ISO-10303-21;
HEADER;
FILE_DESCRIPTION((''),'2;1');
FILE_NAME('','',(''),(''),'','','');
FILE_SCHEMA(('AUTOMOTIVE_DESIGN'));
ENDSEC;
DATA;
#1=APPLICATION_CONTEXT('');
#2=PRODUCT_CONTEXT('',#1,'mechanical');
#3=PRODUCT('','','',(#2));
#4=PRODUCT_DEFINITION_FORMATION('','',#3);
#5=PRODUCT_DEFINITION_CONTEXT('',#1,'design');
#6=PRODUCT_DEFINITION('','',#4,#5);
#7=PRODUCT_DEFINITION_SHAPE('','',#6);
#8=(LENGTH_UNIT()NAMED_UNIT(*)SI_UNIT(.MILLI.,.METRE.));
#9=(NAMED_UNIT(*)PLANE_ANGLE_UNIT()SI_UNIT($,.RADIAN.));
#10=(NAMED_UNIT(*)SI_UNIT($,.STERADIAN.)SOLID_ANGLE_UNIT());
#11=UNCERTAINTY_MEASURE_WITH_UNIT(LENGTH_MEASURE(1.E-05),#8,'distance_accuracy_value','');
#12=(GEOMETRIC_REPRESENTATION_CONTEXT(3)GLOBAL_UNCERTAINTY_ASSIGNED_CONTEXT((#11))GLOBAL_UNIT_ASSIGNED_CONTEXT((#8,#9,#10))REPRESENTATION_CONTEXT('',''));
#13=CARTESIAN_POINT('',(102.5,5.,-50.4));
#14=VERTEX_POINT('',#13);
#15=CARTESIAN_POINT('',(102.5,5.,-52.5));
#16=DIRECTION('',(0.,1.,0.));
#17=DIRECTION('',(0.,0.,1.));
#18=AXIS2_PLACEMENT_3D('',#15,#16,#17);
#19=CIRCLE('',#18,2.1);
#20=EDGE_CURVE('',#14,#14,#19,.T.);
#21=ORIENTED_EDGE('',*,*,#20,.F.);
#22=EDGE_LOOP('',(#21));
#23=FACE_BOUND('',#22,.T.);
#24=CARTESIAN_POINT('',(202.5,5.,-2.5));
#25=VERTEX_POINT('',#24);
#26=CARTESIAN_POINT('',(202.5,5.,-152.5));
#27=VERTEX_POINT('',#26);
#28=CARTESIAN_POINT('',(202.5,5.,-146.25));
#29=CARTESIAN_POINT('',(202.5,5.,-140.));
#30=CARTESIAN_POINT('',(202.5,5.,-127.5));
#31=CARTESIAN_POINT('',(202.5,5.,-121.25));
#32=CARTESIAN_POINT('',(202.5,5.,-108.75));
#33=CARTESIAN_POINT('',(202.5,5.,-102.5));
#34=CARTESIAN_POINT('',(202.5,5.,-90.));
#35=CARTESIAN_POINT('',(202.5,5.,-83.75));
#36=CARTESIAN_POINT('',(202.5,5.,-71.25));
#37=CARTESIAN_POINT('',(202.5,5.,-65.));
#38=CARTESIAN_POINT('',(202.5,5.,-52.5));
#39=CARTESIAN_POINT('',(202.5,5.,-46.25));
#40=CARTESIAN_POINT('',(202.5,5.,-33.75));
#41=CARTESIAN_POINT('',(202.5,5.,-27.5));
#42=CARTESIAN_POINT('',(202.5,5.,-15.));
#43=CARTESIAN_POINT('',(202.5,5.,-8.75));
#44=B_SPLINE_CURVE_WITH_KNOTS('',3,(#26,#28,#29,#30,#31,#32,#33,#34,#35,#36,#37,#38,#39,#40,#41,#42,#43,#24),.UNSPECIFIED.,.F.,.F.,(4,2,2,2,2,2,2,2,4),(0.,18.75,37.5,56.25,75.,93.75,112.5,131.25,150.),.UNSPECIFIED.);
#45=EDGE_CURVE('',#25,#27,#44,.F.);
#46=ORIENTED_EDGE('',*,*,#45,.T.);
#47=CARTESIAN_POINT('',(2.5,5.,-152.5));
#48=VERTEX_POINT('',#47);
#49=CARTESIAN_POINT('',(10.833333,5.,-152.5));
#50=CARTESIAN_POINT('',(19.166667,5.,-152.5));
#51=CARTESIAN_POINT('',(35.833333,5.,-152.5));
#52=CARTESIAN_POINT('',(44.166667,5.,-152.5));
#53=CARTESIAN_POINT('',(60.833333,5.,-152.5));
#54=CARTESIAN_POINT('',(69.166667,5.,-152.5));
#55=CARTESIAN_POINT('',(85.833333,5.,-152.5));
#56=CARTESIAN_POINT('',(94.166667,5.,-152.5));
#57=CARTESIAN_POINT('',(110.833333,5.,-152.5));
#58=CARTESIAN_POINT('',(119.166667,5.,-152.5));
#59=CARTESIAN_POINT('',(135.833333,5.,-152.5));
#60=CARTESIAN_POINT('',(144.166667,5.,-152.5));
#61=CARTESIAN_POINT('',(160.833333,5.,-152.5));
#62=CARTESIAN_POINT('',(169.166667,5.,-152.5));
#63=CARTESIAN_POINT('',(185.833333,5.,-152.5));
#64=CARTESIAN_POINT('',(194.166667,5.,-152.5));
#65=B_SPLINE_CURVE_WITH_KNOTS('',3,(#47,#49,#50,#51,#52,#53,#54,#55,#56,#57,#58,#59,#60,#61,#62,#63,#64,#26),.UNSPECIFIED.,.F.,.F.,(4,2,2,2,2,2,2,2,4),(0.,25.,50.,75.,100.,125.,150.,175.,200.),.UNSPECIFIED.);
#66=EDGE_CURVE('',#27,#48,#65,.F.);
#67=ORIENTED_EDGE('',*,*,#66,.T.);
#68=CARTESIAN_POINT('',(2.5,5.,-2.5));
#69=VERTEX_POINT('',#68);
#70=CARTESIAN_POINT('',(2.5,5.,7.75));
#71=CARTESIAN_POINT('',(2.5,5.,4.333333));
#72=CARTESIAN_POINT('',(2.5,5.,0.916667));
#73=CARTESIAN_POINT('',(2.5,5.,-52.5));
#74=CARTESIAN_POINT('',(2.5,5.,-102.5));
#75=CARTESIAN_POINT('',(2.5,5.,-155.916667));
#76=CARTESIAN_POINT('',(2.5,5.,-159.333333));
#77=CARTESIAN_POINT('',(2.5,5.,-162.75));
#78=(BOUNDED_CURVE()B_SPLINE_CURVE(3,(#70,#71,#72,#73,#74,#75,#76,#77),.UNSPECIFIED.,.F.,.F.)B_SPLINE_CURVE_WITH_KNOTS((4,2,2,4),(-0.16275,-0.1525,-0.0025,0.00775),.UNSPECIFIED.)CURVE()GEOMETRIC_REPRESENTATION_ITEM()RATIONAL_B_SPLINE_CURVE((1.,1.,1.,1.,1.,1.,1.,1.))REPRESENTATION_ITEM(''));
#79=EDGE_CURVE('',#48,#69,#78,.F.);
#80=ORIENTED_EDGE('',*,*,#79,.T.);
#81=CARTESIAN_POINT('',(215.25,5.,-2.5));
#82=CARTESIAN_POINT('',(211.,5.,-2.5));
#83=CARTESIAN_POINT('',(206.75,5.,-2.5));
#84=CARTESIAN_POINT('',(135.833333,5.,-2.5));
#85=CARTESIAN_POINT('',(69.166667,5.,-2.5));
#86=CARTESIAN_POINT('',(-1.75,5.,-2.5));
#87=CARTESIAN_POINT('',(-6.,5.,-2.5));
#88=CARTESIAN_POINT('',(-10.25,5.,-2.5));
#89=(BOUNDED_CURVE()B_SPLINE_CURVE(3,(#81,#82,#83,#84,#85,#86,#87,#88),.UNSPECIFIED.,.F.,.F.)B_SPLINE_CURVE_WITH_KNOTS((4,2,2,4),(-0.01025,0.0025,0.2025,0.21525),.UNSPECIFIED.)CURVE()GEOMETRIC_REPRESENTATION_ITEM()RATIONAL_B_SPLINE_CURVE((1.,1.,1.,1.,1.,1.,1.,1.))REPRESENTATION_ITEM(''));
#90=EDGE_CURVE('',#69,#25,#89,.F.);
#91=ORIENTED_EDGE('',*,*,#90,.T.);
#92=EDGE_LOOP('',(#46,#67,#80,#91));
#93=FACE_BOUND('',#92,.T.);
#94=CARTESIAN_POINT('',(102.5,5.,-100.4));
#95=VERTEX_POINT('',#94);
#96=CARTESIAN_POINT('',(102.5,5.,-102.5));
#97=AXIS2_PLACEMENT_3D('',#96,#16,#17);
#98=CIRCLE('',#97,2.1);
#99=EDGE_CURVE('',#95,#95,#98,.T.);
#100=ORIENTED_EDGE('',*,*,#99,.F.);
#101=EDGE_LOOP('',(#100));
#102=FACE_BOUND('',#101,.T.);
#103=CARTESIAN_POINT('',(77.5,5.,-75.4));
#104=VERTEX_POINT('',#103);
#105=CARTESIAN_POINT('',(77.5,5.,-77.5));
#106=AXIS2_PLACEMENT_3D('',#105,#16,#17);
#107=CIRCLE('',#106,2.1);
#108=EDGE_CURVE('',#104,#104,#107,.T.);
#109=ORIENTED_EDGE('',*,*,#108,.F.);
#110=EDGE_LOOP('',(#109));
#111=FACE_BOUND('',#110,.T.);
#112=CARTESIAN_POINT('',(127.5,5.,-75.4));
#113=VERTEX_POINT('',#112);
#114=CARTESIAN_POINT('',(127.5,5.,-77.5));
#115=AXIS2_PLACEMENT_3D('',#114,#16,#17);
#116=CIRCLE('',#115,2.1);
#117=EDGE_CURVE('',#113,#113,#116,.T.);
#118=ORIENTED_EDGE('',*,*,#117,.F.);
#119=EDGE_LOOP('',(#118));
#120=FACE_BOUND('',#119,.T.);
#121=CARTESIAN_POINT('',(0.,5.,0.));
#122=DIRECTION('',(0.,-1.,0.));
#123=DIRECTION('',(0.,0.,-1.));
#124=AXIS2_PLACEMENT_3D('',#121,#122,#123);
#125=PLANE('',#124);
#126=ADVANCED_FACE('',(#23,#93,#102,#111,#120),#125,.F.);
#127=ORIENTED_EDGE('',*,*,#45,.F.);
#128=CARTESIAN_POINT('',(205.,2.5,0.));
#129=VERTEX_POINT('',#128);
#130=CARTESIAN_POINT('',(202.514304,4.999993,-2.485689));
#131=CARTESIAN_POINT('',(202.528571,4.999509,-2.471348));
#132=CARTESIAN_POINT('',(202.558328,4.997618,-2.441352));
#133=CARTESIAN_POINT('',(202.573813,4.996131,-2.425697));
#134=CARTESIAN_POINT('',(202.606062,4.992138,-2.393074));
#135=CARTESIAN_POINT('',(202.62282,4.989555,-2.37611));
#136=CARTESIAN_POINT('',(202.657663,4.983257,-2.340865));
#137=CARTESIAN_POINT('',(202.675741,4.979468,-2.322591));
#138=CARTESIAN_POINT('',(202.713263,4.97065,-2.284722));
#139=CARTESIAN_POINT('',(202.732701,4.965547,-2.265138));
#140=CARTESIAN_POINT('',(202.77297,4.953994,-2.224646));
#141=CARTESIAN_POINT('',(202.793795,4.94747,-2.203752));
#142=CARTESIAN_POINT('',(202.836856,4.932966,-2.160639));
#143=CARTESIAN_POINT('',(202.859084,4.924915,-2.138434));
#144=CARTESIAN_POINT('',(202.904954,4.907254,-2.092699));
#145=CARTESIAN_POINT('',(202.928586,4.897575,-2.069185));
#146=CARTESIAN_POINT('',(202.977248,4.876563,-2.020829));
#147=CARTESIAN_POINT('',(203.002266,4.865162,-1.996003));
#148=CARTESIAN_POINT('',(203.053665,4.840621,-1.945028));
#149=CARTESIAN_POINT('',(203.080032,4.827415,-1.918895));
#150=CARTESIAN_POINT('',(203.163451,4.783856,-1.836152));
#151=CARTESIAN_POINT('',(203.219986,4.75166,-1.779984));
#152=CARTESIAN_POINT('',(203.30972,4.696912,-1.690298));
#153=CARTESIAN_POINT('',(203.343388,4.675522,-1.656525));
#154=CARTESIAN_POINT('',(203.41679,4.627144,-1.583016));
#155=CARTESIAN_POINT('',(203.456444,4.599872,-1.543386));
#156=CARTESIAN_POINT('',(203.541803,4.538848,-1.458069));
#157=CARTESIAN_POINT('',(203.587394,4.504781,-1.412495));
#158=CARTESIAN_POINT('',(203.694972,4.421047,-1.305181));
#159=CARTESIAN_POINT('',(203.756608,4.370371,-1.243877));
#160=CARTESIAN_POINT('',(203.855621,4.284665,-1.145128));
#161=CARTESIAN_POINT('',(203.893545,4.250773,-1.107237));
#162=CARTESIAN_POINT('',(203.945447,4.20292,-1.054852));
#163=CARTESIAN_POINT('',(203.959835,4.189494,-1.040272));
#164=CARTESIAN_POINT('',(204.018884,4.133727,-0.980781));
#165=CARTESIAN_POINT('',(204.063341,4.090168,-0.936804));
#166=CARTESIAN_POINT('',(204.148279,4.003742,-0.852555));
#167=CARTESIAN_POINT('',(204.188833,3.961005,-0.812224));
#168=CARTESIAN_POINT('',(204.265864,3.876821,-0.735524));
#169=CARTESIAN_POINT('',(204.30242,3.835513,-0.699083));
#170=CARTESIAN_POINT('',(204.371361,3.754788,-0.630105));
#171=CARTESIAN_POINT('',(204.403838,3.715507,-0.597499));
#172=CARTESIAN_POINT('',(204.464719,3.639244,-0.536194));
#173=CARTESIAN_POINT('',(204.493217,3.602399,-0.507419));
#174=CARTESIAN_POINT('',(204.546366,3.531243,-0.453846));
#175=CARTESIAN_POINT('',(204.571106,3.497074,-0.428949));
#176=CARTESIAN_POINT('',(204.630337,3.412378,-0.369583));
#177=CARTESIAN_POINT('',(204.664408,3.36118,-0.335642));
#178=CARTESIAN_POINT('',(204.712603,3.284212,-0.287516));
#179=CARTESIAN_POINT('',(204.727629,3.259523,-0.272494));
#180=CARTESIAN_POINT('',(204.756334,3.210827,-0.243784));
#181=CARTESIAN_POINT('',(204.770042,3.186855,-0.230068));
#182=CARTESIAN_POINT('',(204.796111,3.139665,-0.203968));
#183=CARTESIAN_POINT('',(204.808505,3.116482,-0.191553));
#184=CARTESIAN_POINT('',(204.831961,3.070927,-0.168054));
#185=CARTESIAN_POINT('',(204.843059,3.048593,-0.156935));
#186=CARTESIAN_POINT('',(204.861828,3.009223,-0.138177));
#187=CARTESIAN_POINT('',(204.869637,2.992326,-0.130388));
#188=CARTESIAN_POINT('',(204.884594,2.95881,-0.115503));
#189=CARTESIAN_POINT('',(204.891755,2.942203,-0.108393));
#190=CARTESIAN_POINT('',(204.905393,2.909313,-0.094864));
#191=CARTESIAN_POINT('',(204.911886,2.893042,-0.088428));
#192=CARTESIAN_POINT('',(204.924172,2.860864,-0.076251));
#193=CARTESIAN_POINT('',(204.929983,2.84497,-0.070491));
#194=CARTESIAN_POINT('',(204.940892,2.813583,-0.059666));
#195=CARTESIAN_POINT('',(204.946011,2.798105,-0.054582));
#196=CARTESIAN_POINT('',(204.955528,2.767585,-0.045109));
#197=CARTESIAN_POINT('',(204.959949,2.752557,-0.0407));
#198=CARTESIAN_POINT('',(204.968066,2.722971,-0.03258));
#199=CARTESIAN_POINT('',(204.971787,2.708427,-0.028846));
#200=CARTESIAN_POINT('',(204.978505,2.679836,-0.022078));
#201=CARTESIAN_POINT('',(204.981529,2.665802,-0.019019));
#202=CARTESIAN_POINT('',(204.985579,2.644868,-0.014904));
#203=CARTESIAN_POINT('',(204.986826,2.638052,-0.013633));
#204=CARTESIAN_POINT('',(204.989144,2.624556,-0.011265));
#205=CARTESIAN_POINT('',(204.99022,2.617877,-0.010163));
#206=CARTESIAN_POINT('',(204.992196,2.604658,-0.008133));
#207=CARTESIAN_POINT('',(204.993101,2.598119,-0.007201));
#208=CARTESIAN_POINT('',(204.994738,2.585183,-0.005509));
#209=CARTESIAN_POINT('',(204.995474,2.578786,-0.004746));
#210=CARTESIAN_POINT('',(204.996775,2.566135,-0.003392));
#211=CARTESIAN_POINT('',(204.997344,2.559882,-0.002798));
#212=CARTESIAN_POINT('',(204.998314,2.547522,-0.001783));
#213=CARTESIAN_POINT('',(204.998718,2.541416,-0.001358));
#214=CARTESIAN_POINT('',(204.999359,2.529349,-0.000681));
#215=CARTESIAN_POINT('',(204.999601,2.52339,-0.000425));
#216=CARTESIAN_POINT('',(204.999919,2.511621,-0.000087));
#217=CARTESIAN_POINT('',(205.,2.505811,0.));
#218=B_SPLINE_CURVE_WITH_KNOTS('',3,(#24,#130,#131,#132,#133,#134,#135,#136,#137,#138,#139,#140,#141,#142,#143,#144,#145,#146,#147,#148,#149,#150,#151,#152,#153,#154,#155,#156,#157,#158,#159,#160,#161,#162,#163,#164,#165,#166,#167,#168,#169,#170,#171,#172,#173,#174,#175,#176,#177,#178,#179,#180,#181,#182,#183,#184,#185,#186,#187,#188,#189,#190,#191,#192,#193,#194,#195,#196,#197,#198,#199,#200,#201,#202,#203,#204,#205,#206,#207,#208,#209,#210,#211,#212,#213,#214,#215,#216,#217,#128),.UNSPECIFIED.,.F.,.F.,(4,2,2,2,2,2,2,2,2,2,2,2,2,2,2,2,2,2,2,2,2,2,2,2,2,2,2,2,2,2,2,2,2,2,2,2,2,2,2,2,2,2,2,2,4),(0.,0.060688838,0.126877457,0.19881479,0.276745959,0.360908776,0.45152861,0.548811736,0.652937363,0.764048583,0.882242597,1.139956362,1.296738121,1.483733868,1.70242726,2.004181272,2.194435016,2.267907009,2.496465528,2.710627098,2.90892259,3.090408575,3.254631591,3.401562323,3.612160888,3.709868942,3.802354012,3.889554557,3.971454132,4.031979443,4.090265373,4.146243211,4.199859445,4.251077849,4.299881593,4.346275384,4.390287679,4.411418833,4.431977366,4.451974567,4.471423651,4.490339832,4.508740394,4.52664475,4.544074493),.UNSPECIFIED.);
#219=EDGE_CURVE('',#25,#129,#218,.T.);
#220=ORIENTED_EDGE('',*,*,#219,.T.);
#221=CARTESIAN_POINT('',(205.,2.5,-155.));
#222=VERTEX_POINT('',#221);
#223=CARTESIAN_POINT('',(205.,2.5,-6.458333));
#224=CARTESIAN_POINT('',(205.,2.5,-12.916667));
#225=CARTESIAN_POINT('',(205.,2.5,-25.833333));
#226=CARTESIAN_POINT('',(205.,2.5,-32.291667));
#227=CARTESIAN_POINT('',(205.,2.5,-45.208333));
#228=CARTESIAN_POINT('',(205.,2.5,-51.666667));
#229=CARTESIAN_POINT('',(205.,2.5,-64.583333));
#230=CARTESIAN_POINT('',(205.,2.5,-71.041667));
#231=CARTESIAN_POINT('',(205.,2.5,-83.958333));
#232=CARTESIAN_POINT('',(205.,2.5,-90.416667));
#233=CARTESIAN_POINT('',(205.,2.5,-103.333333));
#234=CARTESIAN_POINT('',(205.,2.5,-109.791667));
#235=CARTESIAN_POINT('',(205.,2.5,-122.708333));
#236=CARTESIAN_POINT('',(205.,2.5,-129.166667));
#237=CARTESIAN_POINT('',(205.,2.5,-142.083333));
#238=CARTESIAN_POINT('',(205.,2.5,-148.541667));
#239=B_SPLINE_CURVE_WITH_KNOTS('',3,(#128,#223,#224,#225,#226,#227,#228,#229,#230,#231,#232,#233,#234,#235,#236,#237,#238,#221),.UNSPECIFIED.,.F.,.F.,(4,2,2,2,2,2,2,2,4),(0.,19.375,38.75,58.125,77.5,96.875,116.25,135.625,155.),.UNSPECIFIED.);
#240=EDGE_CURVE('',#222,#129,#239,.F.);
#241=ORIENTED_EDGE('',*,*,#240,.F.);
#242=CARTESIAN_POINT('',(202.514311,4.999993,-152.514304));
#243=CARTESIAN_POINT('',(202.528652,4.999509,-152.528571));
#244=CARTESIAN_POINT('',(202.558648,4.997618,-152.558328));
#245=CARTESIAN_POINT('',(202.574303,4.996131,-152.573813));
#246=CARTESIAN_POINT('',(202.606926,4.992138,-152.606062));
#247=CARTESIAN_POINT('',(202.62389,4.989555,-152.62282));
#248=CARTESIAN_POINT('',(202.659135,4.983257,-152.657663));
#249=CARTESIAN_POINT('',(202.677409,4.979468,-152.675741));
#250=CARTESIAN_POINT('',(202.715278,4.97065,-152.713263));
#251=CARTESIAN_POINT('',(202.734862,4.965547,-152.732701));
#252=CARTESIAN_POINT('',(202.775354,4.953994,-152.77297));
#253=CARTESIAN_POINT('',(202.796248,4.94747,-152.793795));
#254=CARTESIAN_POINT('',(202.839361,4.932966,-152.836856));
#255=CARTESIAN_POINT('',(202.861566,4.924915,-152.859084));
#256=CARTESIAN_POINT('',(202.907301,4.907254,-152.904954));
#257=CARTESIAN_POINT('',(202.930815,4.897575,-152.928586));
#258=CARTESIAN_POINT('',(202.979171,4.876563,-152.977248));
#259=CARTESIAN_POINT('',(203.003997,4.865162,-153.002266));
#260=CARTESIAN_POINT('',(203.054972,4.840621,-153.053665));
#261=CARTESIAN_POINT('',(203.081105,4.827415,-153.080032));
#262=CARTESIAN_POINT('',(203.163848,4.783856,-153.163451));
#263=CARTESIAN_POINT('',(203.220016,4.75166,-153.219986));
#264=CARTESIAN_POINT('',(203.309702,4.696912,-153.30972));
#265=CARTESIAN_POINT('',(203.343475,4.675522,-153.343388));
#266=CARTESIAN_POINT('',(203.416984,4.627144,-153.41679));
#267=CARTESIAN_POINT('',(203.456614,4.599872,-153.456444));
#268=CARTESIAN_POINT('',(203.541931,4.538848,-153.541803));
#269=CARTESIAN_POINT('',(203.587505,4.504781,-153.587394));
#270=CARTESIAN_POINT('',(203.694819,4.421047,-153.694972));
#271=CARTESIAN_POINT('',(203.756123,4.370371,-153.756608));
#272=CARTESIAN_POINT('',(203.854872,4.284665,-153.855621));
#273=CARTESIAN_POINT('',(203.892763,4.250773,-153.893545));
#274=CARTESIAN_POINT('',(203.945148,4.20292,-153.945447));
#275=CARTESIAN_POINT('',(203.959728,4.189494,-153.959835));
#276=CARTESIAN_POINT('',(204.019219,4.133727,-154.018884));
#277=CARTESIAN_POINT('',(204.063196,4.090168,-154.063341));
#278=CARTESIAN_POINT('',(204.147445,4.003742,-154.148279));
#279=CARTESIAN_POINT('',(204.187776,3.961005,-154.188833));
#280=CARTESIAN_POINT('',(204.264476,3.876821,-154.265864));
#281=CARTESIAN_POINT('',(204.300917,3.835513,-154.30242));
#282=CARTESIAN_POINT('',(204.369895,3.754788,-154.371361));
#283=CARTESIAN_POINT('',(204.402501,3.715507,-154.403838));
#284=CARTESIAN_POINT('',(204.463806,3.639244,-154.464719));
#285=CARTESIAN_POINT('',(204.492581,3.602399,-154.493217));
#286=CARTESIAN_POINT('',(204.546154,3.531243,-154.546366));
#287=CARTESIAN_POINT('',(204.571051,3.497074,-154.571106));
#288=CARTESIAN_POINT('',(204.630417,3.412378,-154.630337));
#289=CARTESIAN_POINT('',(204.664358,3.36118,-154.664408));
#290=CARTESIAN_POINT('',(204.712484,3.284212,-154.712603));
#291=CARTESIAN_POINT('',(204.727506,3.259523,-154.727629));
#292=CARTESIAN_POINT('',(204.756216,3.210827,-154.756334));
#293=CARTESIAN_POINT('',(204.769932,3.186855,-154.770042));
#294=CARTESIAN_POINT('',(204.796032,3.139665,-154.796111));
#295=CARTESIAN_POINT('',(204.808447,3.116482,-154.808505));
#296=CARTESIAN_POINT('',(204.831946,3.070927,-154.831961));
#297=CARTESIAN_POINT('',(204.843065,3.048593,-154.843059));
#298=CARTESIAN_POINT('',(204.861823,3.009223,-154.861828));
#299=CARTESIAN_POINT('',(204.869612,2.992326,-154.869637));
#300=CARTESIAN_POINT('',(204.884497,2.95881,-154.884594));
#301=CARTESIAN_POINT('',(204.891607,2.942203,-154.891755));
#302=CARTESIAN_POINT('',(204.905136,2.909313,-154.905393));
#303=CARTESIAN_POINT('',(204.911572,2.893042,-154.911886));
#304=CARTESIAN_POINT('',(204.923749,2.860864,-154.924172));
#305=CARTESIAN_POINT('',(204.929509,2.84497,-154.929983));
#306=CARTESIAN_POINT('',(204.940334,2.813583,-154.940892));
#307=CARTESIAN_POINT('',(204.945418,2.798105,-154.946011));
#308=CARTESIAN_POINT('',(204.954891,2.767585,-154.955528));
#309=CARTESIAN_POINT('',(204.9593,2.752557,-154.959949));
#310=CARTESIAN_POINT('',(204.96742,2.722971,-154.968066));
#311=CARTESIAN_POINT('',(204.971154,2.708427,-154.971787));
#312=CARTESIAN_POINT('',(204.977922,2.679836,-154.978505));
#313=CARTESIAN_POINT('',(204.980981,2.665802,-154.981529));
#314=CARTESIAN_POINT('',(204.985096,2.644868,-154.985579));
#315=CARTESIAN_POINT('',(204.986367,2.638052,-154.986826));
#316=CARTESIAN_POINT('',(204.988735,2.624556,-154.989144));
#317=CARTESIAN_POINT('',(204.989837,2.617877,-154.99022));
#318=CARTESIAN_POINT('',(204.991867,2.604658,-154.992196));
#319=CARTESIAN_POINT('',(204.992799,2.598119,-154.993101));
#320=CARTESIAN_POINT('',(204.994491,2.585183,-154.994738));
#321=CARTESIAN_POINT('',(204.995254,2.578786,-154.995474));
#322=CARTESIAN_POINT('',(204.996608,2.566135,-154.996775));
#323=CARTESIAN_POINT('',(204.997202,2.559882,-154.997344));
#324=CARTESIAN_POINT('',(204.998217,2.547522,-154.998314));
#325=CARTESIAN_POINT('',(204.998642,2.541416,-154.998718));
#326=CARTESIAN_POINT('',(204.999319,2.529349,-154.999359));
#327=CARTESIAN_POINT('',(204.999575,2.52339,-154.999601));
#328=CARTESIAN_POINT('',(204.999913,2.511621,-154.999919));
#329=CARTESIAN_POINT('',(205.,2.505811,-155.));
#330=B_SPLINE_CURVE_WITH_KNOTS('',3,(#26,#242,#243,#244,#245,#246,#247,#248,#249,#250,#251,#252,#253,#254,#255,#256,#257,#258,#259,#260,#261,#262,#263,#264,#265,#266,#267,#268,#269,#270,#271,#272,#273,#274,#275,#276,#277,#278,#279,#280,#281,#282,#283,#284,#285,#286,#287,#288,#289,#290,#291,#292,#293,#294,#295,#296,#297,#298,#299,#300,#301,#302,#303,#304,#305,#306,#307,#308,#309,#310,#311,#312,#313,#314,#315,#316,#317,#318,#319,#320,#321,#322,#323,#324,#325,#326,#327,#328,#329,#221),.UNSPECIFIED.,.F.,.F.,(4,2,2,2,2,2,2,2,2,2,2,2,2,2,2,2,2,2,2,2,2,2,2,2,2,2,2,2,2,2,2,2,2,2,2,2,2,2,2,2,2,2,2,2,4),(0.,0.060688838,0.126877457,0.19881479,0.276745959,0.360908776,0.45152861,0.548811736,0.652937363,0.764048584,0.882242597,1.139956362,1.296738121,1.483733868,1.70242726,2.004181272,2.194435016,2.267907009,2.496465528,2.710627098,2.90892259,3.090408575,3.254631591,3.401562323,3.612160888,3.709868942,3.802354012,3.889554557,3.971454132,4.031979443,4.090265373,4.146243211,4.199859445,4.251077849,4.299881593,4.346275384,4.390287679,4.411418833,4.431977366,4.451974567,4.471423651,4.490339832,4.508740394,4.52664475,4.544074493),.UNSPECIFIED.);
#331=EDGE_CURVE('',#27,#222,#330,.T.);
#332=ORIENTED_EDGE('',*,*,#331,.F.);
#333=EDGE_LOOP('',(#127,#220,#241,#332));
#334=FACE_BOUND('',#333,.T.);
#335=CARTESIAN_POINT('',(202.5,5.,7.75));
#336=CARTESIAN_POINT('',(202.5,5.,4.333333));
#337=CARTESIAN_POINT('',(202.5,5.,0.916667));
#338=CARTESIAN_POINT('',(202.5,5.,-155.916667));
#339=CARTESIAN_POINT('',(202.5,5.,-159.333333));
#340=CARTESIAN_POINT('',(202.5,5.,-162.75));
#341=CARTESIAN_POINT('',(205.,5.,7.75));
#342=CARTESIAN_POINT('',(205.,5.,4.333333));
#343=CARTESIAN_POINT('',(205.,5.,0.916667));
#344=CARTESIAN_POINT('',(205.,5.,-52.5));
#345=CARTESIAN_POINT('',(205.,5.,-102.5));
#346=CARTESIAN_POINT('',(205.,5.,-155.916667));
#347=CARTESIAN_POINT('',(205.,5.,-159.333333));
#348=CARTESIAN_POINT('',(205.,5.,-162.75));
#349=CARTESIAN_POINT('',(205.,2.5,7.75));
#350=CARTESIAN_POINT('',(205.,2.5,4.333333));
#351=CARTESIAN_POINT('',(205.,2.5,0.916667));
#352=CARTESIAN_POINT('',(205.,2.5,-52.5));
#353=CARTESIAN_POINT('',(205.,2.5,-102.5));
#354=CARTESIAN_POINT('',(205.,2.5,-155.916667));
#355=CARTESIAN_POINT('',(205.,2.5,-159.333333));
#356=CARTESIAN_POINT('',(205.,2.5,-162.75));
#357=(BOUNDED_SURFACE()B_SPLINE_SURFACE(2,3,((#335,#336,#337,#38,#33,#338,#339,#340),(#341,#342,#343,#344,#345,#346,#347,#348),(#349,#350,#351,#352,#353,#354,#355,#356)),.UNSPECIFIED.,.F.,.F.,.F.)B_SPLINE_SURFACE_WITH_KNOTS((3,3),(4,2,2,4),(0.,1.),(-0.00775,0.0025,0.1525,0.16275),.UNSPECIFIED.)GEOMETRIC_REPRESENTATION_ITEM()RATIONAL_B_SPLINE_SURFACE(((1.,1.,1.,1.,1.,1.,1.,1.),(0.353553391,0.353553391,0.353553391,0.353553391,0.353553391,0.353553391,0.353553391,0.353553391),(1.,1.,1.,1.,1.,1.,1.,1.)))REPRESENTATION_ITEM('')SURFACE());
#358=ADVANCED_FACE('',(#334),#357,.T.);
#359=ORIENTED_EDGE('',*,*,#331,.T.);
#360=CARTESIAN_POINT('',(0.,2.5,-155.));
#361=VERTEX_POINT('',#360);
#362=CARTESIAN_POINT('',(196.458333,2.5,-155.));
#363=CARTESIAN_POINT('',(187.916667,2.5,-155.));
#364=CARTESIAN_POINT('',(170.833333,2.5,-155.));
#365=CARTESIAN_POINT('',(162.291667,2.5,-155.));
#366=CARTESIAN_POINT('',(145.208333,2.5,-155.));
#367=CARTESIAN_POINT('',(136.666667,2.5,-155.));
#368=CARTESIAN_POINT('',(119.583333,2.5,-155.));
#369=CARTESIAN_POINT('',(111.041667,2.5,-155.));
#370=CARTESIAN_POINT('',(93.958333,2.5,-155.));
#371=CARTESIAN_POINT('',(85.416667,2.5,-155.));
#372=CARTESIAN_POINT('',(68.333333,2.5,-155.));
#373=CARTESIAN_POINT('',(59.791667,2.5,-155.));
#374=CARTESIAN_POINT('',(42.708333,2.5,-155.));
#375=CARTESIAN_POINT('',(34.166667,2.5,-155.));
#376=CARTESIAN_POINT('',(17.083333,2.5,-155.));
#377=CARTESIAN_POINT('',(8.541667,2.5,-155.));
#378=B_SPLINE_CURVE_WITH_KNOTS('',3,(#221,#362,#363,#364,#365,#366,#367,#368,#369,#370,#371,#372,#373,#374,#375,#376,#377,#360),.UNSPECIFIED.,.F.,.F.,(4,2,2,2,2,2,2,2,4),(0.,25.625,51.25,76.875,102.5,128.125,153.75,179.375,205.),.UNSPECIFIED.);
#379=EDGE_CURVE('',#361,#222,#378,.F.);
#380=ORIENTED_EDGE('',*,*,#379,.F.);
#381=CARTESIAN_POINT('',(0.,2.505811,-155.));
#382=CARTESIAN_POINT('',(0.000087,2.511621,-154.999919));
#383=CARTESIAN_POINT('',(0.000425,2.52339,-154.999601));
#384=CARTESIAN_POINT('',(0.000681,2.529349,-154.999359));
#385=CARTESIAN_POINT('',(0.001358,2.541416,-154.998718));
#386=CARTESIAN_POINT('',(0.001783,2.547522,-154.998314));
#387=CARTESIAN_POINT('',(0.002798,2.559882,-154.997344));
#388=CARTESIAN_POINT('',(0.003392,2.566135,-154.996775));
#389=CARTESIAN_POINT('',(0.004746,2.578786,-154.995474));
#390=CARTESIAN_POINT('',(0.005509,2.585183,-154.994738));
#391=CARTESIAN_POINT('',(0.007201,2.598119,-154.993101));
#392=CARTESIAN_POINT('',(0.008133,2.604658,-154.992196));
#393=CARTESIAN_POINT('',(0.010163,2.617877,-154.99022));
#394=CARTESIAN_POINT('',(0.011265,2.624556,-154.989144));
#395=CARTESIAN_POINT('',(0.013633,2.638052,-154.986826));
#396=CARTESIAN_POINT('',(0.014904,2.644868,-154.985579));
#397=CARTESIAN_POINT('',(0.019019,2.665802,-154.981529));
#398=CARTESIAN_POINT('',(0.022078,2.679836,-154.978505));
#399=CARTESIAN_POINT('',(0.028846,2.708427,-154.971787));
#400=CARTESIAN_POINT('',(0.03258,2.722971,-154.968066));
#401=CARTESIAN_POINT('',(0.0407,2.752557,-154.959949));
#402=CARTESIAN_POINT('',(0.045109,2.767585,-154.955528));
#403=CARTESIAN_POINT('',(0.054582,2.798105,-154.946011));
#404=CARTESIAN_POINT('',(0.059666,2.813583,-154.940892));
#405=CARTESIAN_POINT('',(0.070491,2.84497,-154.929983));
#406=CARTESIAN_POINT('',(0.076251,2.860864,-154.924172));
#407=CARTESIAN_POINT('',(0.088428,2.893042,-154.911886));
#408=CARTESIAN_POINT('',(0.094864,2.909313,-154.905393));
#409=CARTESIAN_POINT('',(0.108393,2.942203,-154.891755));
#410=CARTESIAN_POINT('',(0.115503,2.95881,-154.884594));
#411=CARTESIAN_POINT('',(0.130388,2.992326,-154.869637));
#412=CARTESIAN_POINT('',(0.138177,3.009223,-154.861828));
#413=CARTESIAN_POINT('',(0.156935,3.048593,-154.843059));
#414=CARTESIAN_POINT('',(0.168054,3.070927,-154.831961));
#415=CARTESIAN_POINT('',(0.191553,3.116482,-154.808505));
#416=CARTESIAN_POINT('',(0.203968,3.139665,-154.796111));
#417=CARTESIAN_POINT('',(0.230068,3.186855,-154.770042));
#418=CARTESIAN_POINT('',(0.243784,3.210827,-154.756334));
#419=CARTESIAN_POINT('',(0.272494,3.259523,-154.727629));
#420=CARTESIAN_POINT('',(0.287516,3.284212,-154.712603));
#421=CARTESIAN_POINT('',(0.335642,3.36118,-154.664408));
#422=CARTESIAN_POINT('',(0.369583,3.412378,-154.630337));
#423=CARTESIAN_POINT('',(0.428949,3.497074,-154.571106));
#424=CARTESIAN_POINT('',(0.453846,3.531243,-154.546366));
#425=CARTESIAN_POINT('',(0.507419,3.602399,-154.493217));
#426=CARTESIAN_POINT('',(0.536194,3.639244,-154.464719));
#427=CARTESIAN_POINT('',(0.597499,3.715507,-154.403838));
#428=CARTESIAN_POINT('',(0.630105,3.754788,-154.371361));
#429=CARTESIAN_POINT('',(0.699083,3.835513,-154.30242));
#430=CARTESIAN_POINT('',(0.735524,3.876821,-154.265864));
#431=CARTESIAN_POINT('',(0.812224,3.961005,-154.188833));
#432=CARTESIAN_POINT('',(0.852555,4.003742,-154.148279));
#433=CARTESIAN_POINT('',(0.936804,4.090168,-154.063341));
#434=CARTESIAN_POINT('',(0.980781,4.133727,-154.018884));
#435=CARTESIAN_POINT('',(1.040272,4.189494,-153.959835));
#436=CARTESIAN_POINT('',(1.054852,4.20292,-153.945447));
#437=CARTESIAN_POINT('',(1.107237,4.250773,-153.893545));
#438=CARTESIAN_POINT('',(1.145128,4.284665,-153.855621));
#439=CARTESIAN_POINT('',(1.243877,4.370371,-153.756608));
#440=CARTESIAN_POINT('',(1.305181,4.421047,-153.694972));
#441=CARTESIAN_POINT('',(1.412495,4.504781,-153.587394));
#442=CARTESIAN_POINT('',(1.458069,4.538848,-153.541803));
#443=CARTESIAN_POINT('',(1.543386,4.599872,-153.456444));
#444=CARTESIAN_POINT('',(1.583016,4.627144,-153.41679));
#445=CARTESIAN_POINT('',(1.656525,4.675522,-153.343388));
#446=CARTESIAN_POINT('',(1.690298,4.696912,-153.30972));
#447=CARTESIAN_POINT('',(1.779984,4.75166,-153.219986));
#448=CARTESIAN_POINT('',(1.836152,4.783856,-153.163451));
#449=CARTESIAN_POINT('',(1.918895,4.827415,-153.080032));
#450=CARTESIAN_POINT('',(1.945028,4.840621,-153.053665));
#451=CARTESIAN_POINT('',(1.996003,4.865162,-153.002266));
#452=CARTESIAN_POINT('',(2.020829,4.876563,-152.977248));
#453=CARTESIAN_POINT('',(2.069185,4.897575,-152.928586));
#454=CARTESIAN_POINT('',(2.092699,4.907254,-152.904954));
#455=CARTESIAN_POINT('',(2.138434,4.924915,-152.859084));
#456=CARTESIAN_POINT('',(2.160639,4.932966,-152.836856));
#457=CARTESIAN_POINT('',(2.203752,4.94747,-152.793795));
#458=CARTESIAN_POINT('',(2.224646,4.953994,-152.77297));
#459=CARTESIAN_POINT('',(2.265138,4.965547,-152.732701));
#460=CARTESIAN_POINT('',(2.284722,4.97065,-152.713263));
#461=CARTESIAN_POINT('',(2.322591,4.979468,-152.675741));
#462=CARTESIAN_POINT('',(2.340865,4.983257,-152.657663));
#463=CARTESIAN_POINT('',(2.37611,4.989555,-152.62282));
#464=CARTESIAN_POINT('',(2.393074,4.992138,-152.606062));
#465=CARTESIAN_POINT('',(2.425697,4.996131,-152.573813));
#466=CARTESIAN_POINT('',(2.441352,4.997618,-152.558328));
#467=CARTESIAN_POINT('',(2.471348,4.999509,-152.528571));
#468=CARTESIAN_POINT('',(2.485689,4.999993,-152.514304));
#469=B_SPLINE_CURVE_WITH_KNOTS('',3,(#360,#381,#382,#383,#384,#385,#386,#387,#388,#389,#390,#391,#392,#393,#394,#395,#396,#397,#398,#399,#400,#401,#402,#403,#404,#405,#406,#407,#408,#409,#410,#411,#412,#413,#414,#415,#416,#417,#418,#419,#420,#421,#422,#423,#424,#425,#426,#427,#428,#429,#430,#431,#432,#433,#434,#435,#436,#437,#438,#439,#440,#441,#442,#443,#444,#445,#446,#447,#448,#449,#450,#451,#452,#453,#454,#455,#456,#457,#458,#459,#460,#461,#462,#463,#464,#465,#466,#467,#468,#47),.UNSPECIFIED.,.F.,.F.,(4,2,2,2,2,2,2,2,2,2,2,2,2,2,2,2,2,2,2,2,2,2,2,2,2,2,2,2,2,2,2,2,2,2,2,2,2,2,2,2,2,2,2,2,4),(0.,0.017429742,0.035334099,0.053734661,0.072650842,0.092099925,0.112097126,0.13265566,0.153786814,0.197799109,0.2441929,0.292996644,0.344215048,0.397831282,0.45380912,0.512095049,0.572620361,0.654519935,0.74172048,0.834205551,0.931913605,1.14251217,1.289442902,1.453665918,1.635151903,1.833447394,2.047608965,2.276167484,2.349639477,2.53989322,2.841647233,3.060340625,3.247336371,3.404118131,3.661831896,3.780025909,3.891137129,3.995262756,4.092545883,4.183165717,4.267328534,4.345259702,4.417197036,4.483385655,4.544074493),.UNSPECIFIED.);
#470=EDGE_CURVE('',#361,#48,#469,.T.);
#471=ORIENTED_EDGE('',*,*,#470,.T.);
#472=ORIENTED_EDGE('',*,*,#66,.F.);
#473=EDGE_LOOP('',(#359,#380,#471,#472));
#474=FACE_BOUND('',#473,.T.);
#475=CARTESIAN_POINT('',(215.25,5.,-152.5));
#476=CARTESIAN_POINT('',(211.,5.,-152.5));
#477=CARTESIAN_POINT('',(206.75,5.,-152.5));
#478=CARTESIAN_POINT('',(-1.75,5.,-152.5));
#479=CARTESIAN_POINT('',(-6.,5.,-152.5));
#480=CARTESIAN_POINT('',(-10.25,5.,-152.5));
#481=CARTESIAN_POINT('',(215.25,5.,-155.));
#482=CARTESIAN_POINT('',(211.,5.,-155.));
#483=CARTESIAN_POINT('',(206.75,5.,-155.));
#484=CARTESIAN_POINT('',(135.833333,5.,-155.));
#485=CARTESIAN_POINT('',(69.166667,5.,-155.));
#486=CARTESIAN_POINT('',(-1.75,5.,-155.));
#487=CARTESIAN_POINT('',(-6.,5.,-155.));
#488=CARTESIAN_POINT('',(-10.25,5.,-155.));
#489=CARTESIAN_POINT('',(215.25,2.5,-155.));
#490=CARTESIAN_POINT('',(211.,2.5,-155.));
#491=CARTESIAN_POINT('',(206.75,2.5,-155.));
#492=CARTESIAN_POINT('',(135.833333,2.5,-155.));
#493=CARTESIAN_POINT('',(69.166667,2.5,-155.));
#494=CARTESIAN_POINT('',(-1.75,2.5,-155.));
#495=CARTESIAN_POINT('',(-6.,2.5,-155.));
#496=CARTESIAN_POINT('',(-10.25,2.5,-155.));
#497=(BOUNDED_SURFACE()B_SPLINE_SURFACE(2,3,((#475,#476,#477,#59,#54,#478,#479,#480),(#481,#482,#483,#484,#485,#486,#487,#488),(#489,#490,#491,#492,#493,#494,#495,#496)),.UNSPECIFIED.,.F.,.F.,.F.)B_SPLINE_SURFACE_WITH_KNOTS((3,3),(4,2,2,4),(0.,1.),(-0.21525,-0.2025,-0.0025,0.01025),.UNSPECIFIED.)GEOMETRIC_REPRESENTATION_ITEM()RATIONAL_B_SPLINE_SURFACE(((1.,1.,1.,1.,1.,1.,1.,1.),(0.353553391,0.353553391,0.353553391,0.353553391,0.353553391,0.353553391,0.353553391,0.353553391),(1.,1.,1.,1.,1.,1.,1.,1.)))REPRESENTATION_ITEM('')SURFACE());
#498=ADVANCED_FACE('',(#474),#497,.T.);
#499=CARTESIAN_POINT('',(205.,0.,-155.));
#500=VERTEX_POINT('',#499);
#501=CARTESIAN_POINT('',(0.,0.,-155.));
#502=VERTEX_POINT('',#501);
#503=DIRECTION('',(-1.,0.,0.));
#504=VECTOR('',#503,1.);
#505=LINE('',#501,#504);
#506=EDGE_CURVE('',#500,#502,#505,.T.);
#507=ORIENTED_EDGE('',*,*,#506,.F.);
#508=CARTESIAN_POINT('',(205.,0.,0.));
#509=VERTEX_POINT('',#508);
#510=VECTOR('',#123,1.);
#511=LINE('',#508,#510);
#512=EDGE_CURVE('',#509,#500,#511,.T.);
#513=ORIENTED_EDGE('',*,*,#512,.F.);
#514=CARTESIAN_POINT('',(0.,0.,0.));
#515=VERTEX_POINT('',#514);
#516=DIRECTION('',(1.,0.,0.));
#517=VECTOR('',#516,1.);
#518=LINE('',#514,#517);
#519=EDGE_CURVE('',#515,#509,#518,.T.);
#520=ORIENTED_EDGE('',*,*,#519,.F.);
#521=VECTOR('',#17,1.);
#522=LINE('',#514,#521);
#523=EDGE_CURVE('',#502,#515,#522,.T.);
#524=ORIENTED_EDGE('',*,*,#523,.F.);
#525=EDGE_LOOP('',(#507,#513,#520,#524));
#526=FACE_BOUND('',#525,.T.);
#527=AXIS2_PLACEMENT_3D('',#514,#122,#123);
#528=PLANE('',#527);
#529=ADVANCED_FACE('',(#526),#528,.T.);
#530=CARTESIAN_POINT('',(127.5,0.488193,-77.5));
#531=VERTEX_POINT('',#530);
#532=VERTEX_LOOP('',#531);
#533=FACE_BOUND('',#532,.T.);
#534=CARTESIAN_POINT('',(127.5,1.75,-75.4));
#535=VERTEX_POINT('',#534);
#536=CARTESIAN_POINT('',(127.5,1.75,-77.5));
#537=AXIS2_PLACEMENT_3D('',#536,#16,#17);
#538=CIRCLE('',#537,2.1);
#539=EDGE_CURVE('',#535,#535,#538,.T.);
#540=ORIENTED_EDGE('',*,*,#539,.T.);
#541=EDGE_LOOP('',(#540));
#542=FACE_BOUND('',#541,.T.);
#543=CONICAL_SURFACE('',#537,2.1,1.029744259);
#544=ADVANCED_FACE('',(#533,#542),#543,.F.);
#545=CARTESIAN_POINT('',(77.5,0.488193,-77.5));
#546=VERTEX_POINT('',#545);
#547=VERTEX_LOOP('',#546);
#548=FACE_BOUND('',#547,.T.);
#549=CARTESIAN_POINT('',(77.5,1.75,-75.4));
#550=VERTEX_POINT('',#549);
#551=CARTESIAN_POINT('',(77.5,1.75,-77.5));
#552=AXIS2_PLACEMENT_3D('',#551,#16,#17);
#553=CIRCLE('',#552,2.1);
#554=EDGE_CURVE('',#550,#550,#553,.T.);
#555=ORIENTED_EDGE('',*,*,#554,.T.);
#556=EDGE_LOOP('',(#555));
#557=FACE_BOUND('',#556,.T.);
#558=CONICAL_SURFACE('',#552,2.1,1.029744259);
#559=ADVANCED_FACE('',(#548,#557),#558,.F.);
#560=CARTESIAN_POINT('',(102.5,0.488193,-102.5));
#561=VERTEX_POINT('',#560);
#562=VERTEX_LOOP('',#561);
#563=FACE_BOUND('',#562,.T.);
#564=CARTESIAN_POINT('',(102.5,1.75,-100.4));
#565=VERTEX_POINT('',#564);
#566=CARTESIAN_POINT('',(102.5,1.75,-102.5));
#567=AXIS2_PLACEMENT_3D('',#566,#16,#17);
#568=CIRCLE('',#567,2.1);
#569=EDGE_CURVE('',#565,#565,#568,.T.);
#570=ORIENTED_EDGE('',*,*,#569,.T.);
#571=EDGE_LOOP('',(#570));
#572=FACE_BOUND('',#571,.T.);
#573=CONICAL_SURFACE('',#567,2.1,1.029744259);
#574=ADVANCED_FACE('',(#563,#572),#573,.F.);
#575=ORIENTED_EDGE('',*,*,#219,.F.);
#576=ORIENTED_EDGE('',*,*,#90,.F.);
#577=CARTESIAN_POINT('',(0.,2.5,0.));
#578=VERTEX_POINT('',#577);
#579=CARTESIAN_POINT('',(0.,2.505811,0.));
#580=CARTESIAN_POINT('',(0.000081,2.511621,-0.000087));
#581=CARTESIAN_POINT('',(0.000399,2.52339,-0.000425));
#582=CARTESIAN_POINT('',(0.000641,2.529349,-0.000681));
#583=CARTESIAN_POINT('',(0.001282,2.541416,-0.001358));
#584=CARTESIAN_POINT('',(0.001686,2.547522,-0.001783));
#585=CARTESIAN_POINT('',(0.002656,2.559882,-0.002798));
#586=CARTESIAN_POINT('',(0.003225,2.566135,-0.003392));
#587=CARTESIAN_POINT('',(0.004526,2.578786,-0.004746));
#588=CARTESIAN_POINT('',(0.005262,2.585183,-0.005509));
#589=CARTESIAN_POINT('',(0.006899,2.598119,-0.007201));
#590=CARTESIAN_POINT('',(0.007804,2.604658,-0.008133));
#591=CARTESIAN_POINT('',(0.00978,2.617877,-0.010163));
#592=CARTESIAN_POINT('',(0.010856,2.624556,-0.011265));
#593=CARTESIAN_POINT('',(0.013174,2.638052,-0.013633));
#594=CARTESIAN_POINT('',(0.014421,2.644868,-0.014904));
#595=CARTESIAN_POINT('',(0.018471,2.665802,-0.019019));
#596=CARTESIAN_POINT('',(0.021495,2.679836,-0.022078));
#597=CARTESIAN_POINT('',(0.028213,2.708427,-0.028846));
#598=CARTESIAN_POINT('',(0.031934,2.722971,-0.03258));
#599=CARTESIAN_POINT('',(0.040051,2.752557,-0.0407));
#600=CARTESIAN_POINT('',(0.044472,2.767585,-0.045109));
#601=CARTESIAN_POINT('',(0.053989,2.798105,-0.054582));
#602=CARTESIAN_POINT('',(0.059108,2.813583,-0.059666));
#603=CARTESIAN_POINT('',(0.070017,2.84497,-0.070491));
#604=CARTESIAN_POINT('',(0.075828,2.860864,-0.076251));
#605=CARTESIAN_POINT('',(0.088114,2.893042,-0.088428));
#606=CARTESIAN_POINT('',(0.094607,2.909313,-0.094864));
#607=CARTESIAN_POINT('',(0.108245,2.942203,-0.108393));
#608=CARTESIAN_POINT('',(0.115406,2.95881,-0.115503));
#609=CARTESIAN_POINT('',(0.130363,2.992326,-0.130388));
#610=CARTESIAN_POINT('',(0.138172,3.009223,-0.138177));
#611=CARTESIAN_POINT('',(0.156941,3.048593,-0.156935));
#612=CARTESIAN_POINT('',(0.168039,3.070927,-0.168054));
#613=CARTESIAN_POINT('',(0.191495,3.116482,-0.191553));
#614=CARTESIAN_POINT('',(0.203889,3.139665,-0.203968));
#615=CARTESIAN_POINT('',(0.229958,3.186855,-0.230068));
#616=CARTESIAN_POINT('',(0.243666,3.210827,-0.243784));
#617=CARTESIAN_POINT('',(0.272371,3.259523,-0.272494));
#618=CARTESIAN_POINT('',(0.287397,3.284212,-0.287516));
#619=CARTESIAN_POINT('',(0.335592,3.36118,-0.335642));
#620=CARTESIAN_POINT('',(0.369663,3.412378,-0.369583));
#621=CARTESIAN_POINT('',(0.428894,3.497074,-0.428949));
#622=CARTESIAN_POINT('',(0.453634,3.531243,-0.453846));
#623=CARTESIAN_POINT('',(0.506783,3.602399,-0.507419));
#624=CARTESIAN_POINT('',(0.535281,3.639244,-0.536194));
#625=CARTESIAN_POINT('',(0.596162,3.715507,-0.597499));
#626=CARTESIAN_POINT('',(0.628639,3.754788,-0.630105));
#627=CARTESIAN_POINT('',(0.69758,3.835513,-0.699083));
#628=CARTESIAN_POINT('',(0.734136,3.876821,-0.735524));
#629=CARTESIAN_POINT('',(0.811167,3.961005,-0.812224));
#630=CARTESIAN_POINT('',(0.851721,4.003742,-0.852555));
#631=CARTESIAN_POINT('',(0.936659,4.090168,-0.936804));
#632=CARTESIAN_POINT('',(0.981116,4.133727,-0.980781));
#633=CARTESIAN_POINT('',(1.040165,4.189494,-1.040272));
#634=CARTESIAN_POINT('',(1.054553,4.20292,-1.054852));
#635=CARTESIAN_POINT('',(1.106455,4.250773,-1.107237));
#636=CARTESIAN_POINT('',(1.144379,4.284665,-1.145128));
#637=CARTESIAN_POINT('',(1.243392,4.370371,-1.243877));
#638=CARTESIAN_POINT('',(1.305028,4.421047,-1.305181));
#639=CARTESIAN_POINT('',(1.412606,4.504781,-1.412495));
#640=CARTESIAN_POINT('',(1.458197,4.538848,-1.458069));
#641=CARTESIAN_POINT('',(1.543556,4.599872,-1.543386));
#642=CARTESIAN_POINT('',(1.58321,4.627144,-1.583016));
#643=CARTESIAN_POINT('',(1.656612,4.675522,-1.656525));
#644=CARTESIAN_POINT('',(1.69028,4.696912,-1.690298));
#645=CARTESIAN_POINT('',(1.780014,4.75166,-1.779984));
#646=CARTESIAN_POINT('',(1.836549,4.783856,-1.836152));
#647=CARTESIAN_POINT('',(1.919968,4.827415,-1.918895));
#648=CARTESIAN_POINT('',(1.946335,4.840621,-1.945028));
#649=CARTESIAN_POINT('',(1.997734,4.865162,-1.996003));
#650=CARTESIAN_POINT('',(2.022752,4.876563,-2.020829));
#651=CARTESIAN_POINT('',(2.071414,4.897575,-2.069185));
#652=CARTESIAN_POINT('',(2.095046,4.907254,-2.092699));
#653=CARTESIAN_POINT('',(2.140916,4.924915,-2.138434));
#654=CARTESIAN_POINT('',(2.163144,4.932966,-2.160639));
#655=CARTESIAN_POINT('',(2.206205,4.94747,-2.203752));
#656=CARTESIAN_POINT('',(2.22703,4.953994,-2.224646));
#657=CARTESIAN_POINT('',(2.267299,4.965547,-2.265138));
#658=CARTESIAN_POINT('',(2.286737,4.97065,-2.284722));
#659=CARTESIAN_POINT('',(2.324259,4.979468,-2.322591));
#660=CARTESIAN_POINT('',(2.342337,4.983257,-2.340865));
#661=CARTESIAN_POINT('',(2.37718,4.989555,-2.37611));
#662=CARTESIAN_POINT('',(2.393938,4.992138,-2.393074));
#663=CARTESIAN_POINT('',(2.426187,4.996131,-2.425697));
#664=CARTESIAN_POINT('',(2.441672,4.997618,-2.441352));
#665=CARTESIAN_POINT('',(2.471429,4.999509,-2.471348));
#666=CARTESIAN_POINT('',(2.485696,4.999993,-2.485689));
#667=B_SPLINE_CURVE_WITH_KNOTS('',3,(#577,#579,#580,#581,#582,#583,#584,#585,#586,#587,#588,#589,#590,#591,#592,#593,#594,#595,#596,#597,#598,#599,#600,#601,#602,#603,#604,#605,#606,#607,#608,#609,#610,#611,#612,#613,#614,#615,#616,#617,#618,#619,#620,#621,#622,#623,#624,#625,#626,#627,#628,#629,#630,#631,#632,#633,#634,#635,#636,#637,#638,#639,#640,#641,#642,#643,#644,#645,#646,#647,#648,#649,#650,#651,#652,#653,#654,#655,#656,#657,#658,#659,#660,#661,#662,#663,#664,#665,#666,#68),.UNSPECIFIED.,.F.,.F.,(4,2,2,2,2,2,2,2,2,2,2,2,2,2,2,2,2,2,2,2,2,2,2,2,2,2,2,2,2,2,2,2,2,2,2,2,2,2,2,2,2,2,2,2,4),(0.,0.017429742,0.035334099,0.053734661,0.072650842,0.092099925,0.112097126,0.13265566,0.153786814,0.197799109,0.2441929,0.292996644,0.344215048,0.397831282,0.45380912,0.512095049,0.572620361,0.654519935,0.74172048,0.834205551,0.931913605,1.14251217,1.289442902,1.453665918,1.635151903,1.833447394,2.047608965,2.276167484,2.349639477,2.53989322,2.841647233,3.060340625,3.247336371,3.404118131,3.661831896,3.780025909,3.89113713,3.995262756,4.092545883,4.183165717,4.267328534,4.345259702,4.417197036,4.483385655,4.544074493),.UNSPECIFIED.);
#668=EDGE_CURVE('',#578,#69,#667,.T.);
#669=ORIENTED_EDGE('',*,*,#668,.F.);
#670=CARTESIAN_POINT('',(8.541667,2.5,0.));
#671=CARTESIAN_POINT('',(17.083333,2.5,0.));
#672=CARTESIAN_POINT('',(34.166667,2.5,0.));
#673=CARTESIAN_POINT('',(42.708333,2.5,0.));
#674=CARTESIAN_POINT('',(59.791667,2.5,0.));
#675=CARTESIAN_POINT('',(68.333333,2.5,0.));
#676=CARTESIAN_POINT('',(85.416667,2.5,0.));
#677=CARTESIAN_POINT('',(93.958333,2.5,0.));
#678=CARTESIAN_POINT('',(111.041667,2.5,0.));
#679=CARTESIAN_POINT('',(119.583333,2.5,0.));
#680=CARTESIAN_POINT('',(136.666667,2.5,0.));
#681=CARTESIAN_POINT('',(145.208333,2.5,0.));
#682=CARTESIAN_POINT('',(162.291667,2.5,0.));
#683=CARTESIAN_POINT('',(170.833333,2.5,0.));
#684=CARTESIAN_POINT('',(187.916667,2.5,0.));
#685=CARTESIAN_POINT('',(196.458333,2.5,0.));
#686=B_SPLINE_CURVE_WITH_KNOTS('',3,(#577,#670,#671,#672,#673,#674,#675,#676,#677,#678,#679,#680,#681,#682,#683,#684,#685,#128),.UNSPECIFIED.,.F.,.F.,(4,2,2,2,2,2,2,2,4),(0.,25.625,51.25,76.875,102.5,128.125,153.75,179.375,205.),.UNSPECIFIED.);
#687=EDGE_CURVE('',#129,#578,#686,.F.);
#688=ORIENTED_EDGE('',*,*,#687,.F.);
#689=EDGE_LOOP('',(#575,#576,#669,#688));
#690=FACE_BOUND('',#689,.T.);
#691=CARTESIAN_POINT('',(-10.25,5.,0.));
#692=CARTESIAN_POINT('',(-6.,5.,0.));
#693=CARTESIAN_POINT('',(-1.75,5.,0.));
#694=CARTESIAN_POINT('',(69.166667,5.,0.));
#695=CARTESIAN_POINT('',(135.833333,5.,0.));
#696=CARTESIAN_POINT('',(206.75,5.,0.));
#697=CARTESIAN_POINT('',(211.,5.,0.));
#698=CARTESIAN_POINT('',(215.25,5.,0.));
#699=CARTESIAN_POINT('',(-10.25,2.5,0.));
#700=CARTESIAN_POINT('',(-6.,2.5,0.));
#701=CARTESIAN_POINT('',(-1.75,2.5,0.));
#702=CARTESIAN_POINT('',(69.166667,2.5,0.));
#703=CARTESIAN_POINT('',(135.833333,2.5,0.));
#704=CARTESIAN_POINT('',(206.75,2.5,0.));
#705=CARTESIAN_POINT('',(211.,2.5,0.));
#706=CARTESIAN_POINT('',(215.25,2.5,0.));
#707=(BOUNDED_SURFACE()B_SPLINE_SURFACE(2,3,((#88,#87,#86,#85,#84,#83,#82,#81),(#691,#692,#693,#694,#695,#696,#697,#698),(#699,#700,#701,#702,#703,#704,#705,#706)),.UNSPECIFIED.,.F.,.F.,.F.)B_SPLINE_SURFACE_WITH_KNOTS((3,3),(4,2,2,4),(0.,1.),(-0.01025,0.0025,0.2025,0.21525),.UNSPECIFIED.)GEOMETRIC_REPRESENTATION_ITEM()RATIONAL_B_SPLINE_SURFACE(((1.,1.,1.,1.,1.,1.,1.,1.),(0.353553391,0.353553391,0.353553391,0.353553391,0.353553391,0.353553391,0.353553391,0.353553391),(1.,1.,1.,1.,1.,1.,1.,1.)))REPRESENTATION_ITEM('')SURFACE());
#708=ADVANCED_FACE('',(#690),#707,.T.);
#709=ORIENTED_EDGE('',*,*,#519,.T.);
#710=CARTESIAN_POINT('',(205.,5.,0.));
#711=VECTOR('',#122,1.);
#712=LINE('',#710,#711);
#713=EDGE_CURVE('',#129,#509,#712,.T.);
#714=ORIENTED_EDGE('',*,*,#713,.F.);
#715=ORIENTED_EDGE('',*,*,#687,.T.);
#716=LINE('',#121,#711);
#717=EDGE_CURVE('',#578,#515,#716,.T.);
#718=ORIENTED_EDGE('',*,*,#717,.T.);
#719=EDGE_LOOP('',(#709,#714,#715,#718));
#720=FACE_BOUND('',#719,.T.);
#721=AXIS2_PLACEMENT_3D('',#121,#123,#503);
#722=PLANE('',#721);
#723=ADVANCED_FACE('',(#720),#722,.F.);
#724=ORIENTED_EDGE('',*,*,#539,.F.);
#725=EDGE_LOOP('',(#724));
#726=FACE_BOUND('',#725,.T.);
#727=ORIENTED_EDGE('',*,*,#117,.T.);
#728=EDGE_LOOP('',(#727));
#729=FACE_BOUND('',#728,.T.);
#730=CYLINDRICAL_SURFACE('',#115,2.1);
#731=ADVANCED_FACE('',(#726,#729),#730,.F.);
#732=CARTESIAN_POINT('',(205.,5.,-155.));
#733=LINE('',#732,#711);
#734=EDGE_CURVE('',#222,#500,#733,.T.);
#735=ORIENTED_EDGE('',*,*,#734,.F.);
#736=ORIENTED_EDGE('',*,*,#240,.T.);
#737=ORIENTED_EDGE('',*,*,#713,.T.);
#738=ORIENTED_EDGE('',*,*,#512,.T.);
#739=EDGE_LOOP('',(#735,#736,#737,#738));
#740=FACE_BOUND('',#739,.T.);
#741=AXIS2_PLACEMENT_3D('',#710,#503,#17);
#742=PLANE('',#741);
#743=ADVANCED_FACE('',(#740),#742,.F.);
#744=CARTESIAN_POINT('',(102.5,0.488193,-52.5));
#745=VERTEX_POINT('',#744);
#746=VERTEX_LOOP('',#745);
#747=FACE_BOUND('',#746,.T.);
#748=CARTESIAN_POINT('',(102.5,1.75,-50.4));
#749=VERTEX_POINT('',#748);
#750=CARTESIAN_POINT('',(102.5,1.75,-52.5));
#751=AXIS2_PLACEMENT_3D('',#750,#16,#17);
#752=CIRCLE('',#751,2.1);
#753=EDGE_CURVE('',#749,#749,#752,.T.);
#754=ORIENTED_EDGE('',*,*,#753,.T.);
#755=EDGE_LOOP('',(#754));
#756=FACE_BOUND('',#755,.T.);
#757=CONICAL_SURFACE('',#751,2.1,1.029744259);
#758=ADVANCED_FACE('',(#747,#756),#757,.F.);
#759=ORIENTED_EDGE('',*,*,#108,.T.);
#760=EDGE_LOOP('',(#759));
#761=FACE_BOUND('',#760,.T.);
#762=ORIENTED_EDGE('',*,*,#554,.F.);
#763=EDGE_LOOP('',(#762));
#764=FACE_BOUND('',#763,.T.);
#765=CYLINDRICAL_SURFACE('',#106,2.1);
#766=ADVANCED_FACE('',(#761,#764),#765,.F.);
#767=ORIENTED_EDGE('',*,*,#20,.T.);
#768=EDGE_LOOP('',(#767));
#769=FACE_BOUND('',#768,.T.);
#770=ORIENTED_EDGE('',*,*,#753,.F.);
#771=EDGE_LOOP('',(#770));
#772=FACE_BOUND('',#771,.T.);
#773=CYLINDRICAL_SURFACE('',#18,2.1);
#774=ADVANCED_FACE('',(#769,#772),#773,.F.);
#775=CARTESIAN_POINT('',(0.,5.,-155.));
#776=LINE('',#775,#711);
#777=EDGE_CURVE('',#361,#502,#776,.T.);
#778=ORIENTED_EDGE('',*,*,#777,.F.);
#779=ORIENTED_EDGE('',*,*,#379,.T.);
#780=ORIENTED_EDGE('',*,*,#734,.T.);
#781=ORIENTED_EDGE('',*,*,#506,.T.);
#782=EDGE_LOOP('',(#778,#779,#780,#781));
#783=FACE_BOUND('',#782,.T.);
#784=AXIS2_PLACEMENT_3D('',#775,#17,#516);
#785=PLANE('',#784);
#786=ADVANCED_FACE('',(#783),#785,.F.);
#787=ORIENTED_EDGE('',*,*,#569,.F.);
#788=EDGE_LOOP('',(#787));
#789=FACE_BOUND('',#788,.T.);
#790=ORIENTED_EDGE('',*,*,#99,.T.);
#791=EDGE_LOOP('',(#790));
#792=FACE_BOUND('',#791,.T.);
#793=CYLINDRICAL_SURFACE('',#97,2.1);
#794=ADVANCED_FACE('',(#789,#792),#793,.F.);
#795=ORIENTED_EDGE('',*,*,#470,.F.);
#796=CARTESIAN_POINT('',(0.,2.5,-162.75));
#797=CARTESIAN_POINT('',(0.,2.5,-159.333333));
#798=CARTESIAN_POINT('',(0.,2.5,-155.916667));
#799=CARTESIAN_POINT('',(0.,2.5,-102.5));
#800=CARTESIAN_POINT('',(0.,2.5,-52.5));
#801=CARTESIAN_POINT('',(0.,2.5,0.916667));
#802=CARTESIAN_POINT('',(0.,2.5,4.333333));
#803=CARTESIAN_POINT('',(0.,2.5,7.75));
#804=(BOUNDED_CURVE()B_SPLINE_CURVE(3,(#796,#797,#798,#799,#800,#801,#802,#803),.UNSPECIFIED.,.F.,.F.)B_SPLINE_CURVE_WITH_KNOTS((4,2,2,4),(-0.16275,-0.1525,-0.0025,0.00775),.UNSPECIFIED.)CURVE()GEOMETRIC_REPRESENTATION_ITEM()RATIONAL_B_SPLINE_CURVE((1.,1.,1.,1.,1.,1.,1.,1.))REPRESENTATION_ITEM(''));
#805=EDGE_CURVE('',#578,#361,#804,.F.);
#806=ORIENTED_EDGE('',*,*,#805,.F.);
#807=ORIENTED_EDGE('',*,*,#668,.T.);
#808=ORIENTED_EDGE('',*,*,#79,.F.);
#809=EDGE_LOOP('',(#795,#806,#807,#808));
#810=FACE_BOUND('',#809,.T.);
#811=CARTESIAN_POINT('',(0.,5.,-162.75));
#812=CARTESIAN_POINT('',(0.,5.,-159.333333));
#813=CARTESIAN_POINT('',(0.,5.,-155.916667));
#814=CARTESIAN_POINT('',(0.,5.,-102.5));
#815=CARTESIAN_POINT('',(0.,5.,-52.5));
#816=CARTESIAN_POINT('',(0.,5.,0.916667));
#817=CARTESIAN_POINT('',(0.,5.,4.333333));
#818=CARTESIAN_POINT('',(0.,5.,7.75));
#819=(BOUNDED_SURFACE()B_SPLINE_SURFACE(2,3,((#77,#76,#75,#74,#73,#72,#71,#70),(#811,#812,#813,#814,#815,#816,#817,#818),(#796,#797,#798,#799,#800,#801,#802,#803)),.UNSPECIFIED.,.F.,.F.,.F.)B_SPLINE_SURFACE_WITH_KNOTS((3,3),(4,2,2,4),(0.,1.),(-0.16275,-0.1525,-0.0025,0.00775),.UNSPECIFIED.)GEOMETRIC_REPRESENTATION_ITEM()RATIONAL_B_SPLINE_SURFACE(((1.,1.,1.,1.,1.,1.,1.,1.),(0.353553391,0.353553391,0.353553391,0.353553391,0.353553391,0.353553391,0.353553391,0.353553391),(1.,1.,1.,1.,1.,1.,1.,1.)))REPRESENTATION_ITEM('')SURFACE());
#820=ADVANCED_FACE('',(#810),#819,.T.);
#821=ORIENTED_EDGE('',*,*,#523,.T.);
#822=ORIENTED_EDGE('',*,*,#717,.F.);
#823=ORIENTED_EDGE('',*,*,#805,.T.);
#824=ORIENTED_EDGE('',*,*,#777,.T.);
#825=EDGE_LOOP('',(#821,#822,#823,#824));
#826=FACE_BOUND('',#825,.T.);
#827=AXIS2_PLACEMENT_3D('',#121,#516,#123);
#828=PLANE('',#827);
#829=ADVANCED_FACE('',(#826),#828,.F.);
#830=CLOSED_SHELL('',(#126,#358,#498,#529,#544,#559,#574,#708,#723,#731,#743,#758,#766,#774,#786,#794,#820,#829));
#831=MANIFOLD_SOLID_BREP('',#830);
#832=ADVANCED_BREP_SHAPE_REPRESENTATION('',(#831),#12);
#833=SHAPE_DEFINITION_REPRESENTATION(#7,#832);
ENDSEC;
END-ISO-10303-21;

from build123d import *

# Parameters (mm, degrees)
CROQUIS1_W                                   = 205
CROQUIS1_H                                   = 155
SALIENTE_EXTRUIR1_DEPTH                      = 5
REDONDEO1_DEPTH                              = 205
REDONDEO1_START                              = -156
REDONDEO1_2_DEPTH                            = 157
CROQUIS2_R                                   = 1.5
CORTAR_EXTRUIR1_DEPTH                        = 3
PERFORADOR_PARA_ROSCAR_HELICOIL_DE_M41_D     = 4.2
PERFORADOR_PARA_ROSCAR_HELICOIL_DE_M41_DEPTH = 3.25
PERFORADOR_PARA_ROSCAR_HELICOIL_DE_M41_TIP   = 1.2618073


with BuildPart() as part:
    # Croquis1 → Saliente-Extruir1 (new body)
    with BuildSketch(Plane(origin=(0, 0, 0), x_dir=(1, 0, 0), z_dir=(0, 1, 0))):
        with Locations((102.5, 77.5)):
            Rectangle(CROQUIS1_W, CROQUIS1_H)
    extrude(amount=SALIENTE_EXTRUIR1_DEPTH)

    # Redondeo1: read off the stored shape, not the designer's step
    # Redondeo1 outline → Redondeo1 (cut)
    with BuildSketch(Plane.YZ):
        with BuildLine():
            Line((5, -155), (5, -152.5))
            add(Edge.make_bspline(
                [(5, -152.5), (5, -155), (2.5, -155)],
                knots=[0, 0, 0, 1, 1, 1], degree=2, weights=[1, 0.353553391, 1]))
            Line((2.5, -155), (5, -155))
        make_face()
        with BuildLine():
            add(Edge.make_bspline(
                [(5, -2.5), (5, 0), (2.5, 0)],
                knots=[0, 0, 0, 1, 1, 1], degree=2, weights=[1, 0.353553391, 1]))
            Line((5, -2.5), (5, 0))
            Line((5, 0), (2.5, 0))
        make_face()
    extrude(amount=REDONDEO1_DEPTH, mode=Mode.SUBTRACT)

    # Redondeo1 2 outline → Redondeo1 2 (cut)
    with BuildSketch(Plane.XY.offset(REDONDEO1_START)):
        with BuildLine():
            Line((205, 5), (202.5, 5))
            add(Edge.make_bspline(
                [(202.5, 5), (205, 5), (205, 2.5)],
                knots=[0, 0, 0, 1, 1, 1], degree=2, weights=[1, 0.353553391, 1]))
            Line((205, 2.5), (205, 5))
        make_face()
        with BuildLine():
            add(Edge.make_bspline(
                [(2.5, 5), (0, 5), (0, 2.5)],
                knots=[0, 0, 0, 1, 1, 1], degree=2, weights=[1, 0.353553391, 1]))
            Line((2.5, 5), (0, 5))
            Line((0, 5), (0, 2.5))
        make_face()
    extrude(amount=REDONDEO1_2_DEPTH, mode=Mode.SUBTRACT)

    # Croquis2 → Cortar-Extruir1 (cut)
    with BuildSketch(Plane(origin=(0, 5, 0), x_dir=(1, 0, 0), z_dir=(0, 1, 0))):
        with Locations(Location((77.5, 77.5, 0), (0, 0, 270))):
            Circle(CROQUIS2_R)
        with Locations(Location((102.5, 102.5, 0), (0, 0, 270))):
            Circle(CROQUIS2_R)
        with Locations(Location((127.5, 77.5, 0), (0, 0, 270))):
            Circle(CROQUIS2_R)
        with Locations(Location((102.5, 52.5, 0), (0, 0, 270))):
            Circle(CROQUIS2_R)
    extrude(amount=-CORTAR_EXTRUIR1_DEPTH, mode=Mode.SUBTRACT)

    # Perforador para roscar Helicoil de M41
    with Locations(Plane(origin=(0, 5, 0), x_dir=(1, 0, 0), z_dir=(0, 1, 0))):
        with Locations((77.5, 77.5), (102.5, 102.5), (127.5, 77.5), (102.5, 52.5)):
            Hole(PERFORADOR_PARA_ROSCAR_HELICOIL_DE_M41_D / 2, depth=PERFORADOR_PARA_ROSCAR_HELICOIL_DE_M41_DEPTH)
            with Locations((0, 0, -(PERFORADOR_PARA_ROSCAR_HELICOIL_DE_M41_DEPTH + PERFORADOR_PARA_ROSCAR_HELICOIL_DE_M41_TIP / 2))):  # 118° drill point
                Cone(0, PERFORADOR_PARA_ROSCAR_HELICOIL_DE_M41_D / 2, PERFORADOR_PARA_ROSCAR_HELICOIL_DE_M41_TIP, mode=Mode.SUBTRACT)


solid = part.part
